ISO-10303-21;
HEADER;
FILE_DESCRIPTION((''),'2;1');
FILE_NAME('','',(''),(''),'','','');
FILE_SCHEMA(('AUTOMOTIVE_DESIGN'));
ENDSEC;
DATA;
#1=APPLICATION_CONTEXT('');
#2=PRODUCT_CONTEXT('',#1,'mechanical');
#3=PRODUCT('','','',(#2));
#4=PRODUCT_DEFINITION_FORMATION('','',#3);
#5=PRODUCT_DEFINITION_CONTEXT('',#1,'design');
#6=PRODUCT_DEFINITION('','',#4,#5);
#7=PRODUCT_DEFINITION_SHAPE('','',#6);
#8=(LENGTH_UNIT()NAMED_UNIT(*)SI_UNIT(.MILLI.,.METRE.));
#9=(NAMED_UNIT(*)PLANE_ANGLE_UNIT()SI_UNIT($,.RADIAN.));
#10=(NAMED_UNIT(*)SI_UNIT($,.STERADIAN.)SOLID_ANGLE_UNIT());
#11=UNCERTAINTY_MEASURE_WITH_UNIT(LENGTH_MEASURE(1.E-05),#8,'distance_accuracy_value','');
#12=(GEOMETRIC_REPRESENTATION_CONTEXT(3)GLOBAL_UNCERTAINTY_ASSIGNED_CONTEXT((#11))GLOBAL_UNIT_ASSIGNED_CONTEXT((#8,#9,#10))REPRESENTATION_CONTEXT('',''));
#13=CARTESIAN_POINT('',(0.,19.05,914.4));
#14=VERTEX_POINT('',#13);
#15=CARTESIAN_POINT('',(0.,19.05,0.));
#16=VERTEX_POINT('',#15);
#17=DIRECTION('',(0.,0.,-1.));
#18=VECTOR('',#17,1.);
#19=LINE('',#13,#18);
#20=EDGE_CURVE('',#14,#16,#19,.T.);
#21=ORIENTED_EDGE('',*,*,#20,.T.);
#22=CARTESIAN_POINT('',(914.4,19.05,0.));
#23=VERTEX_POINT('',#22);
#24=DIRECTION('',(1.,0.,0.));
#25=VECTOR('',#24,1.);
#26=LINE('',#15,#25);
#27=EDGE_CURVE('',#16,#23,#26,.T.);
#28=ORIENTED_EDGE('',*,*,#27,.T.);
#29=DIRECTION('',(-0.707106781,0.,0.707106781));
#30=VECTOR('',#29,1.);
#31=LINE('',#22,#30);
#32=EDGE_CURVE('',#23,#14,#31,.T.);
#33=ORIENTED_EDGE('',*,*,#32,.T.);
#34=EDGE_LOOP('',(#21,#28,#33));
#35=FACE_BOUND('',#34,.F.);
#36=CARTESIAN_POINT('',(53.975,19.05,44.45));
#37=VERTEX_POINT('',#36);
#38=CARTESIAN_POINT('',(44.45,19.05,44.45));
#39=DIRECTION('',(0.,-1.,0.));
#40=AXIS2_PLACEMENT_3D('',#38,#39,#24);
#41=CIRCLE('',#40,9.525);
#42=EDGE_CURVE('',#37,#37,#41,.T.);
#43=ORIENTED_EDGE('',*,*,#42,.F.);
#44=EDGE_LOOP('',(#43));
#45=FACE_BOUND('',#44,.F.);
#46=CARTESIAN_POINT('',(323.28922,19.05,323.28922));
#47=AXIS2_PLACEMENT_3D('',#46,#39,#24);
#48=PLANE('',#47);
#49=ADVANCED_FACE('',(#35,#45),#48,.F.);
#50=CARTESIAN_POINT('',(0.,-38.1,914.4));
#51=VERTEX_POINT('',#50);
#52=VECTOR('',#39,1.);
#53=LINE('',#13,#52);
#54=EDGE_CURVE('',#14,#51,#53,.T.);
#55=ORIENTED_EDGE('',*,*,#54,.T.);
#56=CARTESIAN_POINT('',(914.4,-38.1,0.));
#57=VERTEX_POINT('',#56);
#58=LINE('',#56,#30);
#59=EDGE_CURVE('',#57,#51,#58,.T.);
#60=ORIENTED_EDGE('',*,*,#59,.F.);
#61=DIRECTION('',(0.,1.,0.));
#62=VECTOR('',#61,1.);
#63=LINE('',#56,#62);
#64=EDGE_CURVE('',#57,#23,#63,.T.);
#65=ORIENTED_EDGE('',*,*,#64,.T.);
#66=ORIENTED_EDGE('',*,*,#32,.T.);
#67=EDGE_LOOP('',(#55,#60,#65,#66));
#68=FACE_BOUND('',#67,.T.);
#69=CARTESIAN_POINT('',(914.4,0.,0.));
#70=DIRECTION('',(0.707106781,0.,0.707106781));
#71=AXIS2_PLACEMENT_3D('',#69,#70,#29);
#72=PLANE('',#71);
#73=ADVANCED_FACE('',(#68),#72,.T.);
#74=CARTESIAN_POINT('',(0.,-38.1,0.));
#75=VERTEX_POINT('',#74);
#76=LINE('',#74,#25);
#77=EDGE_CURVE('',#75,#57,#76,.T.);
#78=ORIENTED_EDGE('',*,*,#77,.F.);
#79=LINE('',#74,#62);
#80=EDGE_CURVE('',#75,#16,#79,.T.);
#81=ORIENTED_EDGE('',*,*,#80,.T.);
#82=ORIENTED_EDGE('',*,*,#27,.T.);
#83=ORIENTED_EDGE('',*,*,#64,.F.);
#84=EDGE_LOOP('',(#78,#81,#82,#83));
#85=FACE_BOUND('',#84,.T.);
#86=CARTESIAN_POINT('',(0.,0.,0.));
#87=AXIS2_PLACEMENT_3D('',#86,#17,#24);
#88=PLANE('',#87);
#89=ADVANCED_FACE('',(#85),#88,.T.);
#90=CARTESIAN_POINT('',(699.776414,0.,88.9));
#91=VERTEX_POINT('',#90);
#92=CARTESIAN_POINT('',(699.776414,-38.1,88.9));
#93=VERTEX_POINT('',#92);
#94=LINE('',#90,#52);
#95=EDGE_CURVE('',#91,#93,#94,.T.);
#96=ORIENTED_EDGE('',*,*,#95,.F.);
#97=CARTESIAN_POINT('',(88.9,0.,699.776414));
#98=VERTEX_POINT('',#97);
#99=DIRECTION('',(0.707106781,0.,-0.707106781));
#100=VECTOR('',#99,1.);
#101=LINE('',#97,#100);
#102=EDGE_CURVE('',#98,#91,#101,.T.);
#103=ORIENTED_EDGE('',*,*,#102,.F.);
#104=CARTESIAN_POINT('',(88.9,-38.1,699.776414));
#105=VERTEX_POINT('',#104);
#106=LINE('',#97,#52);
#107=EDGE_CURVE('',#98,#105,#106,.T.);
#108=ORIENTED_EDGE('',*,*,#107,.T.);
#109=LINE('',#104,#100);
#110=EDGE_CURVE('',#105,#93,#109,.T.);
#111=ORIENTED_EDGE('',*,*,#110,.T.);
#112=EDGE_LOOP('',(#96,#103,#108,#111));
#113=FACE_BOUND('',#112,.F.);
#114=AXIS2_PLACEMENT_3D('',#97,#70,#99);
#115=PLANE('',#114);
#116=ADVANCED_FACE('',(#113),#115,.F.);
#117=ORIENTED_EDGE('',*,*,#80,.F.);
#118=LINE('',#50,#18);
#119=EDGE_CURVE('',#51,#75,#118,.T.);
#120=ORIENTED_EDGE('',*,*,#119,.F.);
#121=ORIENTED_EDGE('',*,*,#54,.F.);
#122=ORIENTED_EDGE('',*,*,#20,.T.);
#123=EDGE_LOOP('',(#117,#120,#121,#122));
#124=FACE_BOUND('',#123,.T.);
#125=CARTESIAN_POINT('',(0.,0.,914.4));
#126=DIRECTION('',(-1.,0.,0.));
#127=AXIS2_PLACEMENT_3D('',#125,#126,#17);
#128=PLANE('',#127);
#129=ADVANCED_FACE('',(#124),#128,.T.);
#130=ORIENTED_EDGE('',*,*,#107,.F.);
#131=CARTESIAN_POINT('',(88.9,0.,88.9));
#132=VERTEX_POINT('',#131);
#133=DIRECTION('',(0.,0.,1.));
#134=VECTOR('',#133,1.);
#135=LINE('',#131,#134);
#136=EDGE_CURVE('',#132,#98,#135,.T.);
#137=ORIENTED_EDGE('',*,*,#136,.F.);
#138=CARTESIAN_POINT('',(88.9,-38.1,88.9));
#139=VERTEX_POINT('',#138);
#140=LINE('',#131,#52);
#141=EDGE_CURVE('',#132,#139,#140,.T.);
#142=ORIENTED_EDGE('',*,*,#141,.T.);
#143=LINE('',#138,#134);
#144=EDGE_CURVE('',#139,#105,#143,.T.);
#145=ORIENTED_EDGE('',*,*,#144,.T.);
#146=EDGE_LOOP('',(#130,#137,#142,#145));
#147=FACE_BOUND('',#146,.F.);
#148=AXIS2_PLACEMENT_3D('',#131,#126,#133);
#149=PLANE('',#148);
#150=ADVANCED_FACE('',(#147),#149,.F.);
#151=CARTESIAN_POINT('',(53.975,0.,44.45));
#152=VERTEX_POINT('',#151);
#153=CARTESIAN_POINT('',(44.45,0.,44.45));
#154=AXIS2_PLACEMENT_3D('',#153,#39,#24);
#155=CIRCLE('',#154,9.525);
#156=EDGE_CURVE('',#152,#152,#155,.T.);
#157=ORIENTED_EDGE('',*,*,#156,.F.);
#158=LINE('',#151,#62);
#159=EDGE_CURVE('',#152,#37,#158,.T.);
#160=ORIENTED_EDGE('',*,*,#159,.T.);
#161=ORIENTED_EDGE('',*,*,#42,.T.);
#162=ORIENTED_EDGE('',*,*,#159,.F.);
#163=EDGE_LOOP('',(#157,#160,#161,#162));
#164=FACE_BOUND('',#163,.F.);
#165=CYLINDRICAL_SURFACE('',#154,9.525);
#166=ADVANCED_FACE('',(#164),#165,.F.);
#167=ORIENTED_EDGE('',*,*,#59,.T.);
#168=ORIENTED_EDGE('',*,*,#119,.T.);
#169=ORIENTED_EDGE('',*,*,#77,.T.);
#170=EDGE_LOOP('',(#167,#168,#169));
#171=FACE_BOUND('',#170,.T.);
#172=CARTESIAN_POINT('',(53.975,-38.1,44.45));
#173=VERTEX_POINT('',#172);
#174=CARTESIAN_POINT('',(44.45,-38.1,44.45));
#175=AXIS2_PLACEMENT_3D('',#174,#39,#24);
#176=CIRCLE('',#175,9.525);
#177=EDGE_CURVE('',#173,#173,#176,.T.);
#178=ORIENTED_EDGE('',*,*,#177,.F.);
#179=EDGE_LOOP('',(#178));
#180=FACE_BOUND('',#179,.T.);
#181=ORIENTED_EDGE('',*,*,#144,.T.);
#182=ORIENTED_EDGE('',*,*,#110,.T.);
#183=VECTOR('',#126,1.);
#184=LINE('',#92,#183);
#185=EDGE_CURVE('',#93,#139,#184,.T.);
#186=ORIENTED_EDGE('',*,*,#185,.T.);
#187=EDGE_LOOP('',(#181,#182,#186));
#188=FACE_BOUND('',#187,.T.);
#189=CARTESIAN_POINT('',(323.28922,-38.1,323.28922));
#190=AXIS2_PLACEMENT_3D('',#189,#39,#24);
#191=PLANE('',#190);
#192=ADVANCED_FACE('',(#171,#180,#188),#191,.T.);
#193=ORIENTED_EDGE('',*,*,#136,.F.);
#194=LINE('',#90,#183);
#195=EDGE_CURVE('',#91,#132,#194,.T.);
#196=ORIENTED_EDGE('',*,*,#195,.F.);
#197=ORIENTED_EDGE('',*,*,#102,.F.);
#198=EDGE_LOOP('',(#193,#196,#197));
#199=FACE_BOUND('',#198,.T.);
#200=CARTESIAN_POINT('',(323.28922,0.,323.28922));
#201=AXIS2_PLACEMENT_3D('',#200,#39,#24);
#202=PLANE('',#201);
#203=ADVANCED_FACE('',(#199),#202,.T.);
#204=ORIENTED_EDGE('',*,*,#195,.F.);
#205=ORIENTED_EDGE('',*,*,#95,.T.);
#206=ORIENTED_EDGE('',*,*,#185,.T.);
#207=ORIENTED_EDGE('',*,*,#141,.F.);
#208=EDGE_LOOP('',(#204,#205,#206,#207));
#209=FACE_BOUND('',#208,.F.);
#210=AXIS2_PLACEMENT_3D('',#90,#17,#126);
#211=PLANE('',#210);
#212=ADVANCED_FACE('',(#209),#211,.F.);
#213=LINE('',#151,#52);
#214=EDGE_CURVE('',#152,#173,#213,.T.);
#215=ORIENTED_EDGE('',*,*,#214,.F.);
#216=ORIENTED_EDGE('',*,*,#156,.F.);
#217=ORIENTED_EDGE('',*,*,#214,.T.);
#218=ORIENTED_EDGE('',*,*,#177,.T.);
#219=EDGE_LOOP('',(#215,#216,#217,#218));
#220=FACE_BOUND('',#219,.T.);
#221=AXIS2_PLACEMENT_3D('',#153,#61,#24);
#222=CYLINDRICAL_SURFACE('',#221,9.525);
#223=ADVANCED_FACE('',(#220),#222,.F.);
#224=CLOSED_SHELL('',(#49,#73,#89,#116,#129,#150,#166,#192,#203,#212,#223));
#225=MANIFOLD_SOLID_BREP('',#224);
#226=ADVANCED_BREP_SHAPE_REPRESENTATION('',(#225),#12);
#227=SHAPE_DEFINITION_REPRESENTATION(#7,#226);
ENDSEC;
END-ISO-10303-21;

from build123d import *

# Parameters (mm, degrees)
F0_R     = 9.525
F1_DEPTH = 38.1
F2_DEPTH = 19.05


with BuildPart() as f1:
    # F0 (on Front) → F1 (new body)
    with BuildSketch(Plane.XZ):
        Polygon((914.4, 0), (0, 914.4), (0, 0), align=None)
        with Locations((44.45, 44.45)):
            Circle(F0_R, mode=Mode.SUBTRACT)
        Polygon((699.776414305, 88.9), (88.9, 88.9), (88.9, 699.776414305), align=None, mode=Mode.SUBTRACT)
    extrude(amount=F1_DEPTH)

    # F0 (on Front) → F2 (join)
    with BuildSketch(Plane.XZ):
        Polygon((914.4, 0), (0, 914.4), (0, 0), align=None)
        with Locations((44.45, 44.45)):
            Circle(F0_R, mode=Mode.SUBTRACT)
        Polygon((699.776414305, 88.9), (88.9, 88.9), (88.9, 699.776414305), align=None, mode=Mode.SUBTRACT)
        Polygon((88.9, 699.776414305), (88.9, 88.9), (699.776414305, 88.9), align=None)
    extrude(amount=-F2_DEPTH)


solid = f1.part
